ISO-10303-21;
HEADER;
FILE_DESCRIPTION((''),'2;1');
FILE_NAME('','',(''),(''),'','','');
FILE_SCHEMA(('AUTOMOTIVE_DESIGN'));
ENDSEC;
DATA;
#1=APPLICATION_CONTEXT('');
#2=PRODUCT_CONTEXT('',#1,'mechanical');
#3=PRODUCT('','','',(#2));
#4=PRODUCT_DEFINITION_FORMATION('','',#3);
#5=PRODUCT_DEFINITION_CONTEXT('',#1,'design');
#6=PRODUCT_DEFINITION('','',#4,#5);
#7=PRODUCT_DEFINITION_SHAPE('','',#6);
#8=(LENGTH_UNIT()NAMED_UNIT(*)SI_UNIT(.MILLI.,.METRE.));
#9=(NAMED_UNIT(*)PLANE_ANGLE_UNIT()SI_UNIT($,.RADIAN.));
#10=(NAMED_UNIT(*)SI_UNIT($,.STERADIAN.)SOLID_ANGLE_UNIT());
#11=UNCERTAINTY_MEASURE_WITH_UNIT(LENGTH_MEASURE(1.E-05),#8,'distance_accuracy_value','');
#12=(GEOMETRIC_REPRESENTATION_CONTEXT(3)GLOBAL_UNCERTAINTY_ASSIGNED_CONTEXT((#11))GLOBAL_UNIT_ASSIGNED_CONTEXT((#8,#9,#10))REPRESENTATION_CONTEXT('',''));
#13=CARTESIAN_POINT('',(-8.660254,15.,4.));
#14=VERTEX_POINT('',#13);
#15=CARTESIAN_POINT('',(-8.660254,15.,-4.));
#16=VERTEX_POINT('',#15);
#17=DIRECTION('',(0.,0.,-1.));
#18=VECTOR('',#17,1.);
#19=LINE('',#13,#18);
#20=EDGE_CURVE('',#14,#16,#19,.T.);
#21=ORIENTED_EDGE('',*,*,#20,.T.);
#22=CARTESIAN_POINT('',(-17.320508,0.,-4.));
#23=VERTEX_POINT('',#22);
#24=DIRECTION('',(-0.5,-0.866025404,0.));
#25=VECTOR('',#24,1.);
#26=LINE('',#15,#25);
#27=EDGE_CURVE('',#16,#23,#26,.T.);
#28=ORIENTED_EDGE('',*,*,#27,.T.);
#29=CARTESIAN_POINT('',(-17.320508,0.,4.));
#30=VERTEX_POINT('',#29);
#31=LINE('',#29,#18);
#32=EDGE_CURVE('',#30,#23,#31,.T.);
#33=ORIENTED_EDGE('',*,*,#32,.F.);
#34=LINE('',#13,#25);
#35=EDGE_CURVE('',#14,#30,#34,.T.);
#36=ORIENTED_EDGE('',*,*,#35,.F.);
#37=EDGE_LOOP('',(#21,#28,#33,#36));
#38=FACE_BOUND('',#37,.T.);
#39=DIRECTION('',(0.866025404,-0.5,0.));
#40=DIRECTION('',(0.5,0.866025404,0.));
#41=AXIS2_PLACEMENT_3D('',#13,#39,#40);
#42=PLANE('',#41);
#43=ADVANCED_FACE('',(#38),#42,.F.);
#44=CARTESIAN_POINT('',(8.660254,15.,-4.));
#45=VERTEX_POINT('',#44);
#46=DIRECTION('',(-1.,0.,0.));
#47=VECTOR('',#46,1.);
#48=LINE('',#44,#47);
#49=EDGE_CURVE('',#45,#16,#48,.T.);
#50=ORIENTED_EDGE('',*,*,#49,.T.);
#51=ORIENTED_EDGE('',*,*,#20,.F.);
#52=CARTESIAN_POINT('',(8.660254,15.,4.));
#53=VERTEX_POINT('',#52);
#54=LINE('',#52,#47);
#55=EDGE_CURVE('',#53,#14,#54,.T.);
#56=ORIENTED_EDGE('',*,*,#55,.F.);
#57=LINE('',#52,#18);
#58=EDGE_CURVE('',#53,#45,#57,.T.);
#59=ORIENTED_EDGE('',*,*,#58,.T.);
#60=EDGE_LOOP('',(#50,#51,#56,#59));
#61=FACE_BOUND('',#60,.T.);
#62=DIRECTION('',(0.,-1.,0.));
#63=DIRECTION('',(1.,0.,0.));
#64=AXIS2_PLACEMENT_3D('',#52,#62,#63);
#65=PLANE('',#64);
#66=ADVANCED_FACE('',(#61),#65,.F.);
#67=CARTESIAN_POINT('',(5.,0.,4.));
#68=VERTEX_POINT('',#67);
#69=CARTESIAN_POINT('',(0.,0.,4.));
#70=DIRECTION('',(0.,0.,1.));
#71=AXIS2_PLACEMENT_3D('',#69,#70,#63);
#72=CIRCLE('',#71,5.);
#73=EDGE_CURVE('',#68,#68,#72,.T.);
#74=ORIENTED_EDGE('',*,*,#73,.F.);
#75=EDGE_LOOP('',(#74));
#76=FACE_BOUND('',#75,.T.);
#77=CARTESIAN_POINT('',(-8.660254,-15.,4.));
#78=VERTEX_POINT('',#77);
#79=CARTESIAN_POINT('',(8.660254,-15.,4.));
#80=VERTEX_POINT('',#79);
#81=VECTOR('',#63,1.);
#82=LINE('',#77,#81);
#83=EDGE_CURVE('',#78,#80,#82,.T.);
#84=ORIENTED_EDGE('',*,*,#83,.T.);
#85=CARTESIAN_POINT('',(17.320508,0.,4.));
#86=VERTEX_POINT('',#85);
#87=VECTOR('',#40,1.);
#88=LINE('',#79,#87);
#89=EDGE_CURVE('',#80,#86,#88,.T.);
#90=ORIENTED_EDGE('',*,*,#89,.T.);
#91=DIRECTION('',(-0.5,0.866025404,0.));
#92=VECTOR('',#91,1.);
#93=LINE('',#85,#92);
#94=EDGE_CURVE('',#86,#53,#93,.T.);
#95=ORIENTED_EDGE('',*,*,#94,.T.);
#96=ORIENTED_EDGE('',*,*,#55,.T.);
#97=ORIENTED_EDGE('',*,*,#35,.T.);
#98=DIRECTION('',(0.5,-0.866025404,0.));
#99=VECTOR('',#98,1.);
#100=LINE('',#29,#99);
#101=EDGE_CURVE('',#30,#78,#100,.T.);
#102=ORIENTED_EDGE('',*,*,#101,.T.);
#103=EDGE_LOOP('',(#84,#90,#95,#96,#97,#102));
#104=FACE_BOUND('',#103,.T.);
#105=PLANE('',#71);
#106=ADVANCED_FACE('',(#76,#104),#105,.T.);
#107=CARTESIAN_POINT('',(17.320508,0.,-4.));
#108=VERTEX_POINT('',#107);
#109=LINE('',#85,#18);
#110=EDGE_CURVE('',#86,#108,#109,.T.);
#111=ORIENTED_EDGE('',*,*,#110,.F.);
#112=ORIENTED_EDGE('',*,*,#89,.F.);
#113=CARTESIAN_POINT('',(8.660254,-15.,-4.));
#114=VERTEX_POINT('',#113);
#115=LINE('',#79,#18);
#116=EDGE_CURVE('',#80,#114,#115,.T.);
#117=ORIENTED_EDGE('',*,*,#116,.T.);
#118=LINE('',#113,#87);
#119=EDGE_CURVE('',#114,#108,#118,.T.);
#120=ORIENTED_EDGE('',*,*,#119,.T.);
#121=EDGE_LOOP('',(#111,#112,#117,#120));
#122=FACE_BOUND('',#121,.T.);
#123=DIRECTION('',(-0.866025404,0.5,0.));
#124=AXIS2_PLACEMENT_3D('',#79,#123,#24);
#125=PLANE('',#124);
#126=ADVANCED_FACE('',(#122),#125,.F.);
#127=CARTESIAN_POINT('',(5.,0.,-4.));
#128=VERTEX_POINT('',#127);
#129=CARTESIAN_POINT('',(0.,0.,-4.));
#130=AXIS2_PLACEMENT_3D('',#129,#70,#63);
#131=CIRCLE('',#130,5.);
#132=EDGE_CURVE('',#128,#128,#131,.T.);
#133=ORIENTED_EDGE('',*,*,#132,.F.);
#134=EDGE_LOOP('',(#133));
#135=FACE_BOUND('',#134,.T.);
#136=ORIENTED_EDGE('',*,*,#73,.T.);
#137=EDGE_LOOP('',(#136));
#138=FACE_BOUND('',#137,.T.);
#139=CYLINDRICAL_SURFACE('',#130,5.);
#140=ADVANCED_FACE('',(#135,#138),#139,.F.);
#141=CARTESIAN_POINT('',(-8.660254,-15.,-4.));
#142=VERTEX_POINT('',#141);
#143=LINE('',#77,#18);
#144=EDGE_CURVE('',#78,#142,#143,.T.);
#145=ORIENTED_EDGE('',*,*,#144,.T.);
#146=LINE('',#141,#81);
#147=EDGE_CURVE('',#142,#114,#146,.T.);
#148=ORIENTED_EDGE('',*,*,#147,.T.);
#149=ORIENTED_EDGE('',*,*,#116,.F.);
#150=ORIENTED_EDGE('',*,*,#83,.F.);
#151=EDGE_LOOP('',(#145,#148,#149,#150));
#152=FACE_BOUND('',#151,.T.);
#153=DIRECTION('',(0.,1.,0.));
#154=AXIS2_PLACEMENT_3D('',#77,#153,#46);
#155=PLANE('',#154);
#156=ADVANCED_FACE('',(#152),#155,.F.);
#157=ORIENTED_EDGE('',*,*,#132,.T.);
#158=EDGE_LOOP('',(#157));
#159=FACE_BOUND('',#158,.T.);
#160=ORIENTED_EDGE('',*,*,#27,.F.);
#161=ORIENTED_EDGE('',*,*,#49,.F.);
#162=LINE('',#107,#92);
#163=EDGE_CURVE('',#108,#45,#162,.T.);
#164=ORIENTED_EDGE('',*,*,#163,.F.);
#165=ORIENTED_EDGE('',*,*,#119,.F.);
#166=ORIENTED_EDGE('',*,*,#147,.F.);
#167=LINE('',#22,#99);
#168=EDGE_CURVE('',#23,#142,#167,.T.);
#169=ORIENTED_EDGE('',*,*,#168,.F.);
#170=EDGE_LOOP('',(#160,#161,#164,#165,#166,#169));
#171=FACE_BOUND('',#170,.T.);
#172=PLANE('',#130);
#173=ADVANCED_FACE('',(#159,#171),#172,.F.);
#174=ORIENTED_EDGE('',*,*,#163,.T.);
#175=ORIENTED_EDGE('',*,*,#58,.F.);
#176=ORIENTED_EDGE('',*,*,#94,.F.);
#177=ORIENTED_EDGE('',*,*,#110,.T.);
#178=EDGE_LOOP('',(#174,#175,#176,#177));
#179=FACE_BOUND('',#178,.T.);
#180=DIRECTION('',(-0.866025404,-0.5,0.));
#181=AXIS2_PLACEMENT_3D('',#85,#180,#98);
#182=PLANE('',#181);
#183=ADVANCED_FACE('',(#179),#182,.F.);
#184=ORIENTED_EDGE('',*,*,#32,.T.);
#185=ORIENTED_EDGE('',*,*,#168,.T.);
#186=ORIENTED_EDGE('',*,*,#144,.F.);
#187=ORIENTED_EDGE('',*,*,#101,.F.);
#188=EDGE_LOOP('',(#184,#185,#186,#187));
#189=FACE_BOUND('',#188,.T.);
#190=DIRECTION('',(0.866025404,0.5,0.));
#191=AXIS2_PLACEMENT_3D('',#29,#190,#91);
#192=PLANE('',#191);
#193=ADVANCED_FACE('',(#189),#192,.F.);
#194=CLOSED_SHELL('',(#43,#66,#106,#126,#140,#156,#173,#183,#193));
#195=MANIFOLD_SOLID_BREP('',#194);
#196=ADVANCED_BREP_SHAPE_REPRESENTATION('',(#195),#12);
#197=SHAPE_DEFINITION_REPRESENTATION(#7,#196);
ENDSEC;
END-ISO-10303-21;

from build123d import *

# Parameters (mm, degrees)
EXTRUDE_START       = -4
EXTRUDE_1_DEPTH     = 8
SKETCH_2_R          = 5
CUT_EXTRUDE_1_DEPTH = 25.269322199


# Read off the part's stored shape, not the designer's step: 凸台-拉伸1
with BuildPart() as part:
    # 凸台-拉伸1 outline → 凸台-拉伸1 (new body)
    with BuildSketch(Plane.XY.offset(EXTRUDE_START)):
        Polygon((8.660254038, -15), (17.320508076, 0), (8.660254038, 15), (-8.660254038, 15), (-17.320508076, 0), (-8.660254038, -15), align=None)
    extrude(amount=EXTRUDE_1_DEPTH)

    # 草图2 → 切除-拉伸1 (cut, through all)
    with BuildSketch(Plane.XY.offset(4)):
        Circle(SKETCH_2_R)
    extrude(amount=-CUT_EXTRUDE_1_DEPTH, mode=Mode.SUBTRACT)


solid = part.part
